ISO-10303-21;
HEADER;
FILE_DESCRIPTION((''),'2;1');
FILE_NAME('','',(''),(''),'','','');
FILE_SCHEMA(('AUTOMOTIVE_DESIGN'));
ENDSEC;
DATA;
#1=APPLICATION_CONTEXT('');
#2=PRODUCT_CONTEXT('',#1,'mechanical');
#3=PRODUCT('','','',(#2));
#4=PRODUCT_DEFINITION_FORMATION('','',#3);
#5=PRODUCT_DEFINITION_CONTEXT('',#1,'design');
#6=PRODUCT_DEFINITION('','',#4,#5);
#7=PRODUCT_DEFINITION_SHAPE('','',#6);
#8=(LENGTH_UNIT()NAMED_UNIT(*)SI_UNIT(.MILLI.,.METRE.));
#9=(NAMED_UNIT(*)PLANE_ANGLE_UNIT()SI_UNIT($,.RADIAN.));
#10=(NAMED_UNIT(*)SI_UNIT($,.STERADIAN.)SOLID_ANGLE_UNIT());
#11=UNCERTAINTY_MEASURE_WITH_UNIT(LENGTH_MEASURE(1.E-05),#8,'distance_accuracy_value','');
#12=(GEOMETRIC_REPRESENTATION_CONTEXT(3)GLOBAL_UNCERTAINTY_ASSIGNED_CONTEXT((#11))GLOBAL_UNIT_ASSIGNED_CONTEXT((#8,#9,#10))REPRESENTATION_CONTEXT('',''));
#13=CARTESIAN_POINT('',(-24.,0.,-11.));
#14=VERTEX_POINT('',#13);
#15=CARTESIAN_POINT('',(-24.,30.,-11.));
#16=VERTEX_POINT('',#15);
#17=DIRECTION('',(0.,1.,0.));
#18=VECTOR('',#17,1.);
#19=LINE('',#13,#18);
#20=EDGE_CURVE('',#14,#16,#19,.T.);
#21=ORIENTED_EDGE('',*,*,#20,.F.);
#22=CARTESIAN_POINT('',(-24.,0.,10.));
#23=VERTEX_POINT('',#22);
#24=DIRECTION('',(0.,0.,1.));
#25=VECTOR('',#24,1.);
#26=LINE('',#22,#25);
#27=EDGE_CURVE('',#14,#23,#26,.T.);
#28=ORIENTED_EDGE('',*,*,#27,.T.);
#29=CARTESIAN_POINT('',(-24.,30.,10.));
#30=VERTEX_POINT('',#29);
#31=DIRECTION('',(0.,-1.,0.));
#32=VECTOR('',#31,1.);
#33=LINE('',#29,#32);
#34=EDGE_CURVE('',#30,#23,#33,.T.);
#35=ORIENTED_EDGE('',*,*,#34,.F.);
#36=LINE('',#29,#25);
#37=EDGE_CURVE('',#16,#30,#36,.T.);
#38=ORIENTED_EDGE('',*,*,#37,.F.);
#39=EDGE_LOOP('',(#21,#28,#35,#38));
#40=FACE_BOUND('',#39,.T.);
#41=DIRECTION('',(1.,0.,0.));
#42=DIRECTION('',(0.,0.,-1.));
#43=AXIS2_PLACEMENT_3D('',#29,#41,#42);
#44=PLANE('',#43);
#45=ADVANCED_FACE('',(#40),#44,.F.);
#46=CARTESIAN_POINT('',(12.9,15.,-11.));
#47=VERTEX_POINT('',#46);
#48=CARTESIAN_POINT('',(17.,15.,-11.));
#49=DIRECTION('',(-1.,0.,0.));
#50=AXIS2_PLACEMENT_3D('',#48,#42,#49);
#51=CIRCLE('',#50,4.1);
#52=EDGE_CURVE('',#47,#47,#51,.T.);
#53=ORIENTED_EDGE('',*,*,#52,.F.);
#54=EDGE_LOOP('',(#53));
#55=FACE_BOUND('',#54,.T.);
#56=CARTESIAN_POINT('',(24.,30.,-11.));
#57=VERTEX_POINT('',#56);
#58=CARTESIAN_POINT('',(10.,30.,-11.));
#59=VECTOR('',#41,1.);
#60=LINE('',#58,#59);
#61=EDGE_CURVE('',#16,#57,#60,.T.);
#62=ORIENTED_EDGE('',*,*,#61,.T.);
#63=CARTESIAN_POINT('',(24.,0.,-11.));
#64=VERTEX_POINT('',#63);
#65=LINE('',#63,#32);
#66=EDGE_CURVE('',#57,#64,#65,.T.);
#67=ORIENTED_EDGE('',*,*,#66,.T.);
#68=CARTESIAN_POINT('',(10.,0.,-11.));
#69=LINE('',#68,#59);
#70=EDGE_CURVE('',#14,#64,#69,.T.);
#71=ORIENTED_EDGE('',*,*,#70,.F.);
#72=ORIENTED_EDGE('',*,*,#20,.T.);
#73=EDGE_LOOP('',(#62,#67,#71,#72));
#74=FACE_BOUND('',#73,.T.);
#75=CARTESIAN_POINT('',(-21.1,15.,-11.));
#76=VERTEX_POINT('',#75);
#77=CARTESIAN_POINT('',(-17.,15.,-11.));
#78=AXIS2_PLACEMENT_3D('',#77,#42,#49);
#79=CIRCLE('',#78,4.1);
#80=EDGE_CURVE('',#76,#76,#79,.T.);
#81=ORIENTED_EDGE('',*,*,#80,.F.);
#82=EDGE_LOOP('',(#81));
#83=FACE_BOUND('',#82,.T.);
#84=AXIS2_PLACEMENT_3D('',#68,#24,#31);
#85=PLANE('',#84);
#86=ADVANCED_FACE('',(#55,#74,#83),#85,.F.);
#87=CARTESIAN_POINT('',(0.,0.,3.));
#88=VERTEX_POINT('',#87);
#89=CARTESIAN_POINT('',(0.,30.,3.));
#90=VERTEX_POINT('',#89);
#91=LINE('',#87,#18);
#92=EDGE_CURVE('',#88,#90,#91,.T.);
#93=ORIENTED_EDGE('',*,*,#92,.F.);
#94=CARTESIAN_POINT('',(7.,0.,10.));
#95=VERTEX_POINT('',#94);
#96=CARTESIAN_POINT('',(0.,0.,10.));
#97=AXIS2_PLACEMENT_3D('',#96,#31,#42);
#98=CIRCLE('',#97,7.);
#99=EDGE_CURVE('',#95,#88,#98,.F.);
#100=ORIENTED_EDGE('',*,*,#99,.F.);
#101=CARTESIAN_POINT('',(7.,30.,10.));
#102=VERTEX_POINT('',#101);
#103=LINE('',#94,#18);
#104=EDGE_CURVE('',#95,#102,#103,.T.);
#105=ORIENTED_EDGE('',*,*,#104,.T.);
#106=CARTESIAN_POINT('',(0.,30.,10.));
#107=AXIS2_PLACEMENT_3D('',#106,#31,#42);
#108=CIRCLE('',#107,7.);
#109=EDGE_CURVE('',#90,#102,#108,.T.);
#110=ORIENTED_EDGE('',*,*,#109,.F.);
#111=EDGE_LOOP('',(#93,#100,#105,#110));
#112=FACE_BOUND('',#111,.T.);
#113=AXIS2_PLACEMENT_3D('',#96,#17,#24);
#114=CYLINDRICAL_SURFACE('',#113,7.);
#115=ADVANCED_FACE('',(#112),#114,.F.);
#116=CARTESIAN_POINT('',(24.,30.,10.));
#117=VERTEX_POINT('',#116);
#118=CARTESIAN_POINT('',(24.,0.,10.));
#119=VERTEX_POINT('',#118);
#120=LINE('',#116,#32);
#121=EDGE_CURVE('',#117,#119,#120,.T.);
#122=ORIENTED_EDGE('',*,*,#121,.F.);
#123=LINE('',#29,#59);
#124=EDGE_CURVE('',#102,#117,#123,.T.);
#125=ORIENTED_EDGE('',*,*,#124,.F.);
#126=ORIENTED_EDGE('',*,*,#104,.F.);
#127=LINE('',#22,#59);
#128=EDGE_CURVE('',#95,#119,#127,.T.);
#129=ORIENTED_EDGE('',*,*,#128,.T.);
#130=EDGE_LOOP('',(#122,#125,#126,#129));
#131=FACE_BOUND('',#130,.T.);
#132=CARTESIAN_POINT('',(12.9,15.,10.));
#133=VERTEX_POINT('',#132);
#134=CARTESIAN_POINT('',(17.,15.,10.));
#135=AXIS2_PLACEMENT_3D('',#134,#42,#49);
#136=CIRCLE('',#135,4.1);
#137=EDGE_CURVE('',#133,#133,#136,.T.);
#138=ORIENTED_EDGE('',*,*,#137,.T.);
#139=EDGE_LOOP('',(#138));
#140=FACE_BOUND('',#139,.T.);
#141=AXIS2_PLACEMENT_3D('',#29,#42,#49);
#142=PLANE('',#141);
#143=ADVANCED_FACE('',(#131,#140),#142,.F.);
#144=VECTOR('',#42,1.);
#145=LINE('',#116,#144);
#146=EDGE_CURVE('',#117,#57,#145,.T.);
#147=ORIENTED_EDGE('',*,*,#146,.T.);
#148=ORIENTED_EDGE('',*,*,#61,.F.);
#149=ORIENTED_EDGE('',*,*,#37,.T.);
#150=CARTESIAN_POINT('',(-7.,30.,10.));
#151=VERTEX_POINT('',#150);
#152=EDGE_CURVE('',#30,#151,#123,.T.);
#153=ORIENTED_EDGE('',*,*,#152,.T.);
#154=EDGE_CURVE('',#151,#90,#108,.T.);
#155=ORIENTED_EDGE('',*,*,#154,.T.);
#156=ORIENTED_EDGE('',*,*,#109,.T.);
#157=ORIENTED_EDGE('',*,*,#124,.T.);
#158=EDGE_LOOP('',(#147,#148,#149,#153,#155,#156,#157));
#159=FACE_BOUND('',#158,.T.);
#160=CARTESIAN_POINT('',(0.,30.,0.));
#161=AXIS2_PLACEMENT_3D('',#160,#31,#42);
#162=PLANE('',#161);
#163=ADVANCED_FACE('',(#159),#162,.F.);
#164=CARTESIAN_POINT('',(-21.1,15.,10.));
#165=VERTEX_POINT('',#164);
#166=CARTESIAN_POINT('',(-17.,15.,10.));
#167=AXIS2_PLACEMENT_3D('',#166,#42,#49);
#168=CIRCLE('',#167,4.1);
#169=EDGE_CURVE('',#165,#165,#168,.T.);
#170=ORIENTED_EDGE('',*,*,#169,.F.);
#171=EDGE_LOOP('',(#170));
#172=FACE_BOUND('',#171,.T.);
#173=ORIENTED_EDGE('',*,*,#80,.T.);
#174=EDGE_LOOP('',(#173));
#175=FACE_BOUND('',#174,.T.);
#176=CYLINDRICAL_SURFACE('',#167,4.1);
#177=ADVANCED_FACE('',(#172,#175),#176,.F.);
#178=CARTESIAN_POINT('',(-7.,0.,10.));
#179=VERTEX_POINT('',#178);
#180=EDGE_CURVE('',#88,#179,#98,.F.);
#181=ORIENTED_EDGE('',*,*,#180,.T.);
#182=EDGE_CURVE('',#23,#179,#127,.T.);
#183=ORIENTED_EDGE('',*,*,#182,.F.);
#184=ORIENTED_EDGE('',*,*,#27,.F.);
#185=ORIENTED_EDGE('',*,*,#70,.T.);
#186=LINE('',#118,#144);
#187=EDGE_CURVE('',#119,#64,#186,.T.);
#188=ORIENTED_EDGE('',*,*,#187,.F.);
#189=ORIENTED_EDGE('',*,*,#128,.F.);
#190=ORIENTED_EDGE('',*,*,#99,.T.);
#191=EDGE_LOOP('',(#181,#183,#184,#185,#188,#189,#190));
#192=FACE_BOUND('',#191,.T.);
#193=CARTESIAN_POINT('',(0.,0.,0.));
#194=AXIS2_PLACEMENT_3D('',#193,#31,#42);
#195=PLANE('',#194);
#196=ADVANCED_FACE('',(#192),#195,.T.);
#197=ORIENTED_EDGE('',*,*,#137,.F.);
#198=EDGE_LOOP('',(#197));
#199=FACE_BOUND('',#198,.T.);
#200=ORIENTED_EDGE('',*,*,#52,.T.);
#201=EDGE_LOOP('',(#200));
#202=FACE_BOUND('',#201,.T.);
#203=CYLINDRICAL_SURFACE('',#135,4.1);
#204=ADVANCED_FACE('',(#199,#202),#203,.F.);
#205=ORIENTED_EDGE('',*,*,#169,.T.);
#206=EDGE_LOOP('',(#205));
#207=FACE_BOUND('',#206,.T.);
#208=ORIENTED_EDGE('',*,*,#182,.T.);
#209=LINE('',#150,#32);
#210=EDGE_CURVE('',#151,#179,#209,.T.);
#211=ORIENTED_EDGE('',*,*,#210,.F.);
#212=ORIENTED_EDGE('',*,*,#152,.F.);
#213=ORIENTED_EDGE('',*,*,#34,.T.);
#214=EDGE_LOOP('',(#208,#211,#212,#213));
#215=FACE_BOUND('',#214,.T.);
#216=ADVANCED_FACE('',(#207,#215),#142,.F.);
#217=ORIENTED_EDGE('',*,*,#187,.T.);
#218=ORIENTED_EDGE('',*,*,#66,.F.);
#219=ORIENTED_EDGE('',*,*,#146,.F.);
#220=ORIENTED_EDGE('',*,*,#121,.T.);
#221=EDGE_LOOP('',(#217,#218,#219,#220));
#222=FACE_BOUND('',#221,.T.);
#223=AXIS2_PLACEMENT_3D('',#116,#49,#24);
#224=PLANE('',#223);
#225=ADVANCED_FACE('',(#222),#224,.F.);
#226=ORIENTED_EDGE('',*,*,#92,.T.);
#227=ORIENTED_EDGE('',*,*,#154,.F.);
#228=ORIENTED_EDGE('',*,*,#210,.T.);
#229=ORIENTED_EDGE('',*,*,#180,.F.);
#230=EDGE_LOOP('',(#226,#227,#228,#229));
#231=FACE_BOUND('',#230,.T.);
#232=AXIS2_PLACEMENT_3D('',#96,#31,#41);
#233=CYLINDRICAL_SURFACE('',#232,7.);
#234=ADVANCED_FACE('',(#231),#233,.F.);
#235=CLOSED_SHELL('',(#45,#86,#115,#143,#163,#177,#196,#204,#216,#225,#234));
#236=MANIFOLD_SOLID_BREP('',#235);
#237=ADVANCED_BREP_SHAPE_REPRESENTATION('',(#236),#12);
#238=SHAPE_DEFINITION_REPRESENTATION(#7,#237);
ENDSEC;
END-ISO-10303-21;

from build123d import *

# Parameters (mm, degrees)
SKETCH_1_W          = 48
SKETCH_1_H          = 20
EXTRUDE_1_DEPTH     = 30
SKETCH_2_W          = 14
SKETCH_2_H          = 30
CUT_EXTRUDE_1_DEPTH = 7
SKETCH_7_W          = 22
SKETCH_7_H          = 30
EXTRUDE_2_DEPTH     = 48
SKETCH_8_W          = 21
SKETCH_8_H          = 30
CUT_EXTRUDE_2_DEPTH = 14
SKETCH_9_W          = 21
SKETCH_9_H          = 30
CUT_EXTRUDE_3_DEPTH = 14
SKETCH_11_W         = 10.2
SKETCH_11_H         = 20.2
CUT_EXTRUDE_4_DEPTH = 56.497747702
SKETCH_13_R         = 4.1
CUT_EXTRUDE_5_DEPTH = 44.783558558
FILLET_1_R          = 7
SKETCH1_W           = 10.2
SKETCH1_H           = 20.2
BOSS_EXTRUDE1_DEPTH = 4
SKETCH2_W           = 20
SKETCH2_H           = 21
CUT_EXTRUDE1_DEPTH  = 51


with BuildPart() as part:
    # Эскиз1 → Бобышка-Вытянуть1 (new body)
    with BuildSketch(Plane(origin=(0, 0, 0), x_dir=(1, 0, 0), z_dir=(0, 1, 0))):
        Rectangle(SKETCH_1_W, SKETCH_1_H)
    extrude(amount=EXTRUDE_1_DEPTH)

    # Эскиз2 → Вырез-Вытянуть1 (cut)
    with BuildSketch(Plane.XY.offset(10)):
        with Locations((0, 15)):
            Rectangle(SKETCH_2_W, SKETCH_2_H)
    extrude(amount=-CUT_EXTRUDE_1_DEPTH, mode=Mode.SUBTRACT)

    # Эскиз7 → Бобышка-Вытянуть2 (add)
    with BuildSketch(Plane(origin=(24, 0, 0), x_dir=(0, 0, -1), z_dir=(1, 0, 0))):
        with Locations((21, 15)):
            Rectangle(SKETCH_7_W, SKETCH_7_H)
    extrude(amount=-EXTRUDE_2_DEPTH)

    # Эскиз8 → Вырез-Вытянуть2 (cut)
    with BuildSketch(Plane(origin=(24, 0, 0), x_dir=(0, 0, -1), z_dir=(1, 0, 0))):
        with Locations((21.5, 15)):
            Rectangle(SKETCH_8_W, SKETCH_8_H)
    extrude(amount=-CUT_EXTRUDE_2_DEPTH, mode=Mode.SUBTRACT)

    # Эскиз9 → Вырез-Вытянуть3 (cut)
    with BuildSketch(Plane.ZY.offset(24)):
        with Locations((-21.5, 15)):
            Rectangle(SKETCH_9_W, SKETCH_9_H)
    extrude(amount=-CUT_EXTRUDE_3_DEPTH, mode=Mode.SUBTRACT)

    # Эскиз11 → Вырез-Вытянуть4 (cut, through all)
    with BuildSketch(Plane.ZY.offset(10)):
        with Locations((-21.5, 15)):
            Rectangle(SKETCH_11_W, SKETCH_11_H)
    extrude(amount=-CUT_EXTRUDE_4_DEPTH, mode=Mode.SUBTRACT)

    # Эскиз13 → Вырез-Вытянуть5 (cut, through all)
    with BuildSketch(Plane(origin=(0, 0, -11), x_dir=(-1, 0, 0), z_dir=(0, 0, -1))):
        with Locations((17, 15)):
            Circle(SKETCH_13_R)
        with Locations((-17, 15)):
            Circle(SKETCH_13_R)
    extrude(amount=-CUT_EXTRUDE_5_DEPTH, mode=Mode.SUBTRACT)

    # Скругление1
    fillet_1_edges = [part.edges().sort_by_distance(p)[0] for p in [
        (-7, 15, 3),
        (7, 15, 3),
    ]]
    fillet(fillet_1_edges, radius=FILLET_1_R - 0.0001)  # a hair under: the kernel refuses the full size

    # Sketch1 → Boss-Extrude1 (add)
    with BuildSketch(Plane(origin=(10, 0, 0), x_dir=(0, 0, -1), z_dir=(1, 0, 0))):
        with Locations((21.5, 15)):
            Rectangle(SKETCH1_W, SKETCH1_H)
    extrude(amount=-BOSS_EXTRUDE1_DEPTH)

    # Sketch2 → Cut-Extrude1 (cut, through all)
    with BuildSketch(Plane(origin=(0, 30, 0), x_dir=(1, 0, 0), z_dir=(0, 1, 0))):
        with Locations((0, 21.5)):
            Rectangle(SKETCH2_W, SKETCH2_H)
    extrude(amount=-CUT_EXTRUDE1_DEPTH, mode=Mode.SUBTRACT)


solid = part.part
